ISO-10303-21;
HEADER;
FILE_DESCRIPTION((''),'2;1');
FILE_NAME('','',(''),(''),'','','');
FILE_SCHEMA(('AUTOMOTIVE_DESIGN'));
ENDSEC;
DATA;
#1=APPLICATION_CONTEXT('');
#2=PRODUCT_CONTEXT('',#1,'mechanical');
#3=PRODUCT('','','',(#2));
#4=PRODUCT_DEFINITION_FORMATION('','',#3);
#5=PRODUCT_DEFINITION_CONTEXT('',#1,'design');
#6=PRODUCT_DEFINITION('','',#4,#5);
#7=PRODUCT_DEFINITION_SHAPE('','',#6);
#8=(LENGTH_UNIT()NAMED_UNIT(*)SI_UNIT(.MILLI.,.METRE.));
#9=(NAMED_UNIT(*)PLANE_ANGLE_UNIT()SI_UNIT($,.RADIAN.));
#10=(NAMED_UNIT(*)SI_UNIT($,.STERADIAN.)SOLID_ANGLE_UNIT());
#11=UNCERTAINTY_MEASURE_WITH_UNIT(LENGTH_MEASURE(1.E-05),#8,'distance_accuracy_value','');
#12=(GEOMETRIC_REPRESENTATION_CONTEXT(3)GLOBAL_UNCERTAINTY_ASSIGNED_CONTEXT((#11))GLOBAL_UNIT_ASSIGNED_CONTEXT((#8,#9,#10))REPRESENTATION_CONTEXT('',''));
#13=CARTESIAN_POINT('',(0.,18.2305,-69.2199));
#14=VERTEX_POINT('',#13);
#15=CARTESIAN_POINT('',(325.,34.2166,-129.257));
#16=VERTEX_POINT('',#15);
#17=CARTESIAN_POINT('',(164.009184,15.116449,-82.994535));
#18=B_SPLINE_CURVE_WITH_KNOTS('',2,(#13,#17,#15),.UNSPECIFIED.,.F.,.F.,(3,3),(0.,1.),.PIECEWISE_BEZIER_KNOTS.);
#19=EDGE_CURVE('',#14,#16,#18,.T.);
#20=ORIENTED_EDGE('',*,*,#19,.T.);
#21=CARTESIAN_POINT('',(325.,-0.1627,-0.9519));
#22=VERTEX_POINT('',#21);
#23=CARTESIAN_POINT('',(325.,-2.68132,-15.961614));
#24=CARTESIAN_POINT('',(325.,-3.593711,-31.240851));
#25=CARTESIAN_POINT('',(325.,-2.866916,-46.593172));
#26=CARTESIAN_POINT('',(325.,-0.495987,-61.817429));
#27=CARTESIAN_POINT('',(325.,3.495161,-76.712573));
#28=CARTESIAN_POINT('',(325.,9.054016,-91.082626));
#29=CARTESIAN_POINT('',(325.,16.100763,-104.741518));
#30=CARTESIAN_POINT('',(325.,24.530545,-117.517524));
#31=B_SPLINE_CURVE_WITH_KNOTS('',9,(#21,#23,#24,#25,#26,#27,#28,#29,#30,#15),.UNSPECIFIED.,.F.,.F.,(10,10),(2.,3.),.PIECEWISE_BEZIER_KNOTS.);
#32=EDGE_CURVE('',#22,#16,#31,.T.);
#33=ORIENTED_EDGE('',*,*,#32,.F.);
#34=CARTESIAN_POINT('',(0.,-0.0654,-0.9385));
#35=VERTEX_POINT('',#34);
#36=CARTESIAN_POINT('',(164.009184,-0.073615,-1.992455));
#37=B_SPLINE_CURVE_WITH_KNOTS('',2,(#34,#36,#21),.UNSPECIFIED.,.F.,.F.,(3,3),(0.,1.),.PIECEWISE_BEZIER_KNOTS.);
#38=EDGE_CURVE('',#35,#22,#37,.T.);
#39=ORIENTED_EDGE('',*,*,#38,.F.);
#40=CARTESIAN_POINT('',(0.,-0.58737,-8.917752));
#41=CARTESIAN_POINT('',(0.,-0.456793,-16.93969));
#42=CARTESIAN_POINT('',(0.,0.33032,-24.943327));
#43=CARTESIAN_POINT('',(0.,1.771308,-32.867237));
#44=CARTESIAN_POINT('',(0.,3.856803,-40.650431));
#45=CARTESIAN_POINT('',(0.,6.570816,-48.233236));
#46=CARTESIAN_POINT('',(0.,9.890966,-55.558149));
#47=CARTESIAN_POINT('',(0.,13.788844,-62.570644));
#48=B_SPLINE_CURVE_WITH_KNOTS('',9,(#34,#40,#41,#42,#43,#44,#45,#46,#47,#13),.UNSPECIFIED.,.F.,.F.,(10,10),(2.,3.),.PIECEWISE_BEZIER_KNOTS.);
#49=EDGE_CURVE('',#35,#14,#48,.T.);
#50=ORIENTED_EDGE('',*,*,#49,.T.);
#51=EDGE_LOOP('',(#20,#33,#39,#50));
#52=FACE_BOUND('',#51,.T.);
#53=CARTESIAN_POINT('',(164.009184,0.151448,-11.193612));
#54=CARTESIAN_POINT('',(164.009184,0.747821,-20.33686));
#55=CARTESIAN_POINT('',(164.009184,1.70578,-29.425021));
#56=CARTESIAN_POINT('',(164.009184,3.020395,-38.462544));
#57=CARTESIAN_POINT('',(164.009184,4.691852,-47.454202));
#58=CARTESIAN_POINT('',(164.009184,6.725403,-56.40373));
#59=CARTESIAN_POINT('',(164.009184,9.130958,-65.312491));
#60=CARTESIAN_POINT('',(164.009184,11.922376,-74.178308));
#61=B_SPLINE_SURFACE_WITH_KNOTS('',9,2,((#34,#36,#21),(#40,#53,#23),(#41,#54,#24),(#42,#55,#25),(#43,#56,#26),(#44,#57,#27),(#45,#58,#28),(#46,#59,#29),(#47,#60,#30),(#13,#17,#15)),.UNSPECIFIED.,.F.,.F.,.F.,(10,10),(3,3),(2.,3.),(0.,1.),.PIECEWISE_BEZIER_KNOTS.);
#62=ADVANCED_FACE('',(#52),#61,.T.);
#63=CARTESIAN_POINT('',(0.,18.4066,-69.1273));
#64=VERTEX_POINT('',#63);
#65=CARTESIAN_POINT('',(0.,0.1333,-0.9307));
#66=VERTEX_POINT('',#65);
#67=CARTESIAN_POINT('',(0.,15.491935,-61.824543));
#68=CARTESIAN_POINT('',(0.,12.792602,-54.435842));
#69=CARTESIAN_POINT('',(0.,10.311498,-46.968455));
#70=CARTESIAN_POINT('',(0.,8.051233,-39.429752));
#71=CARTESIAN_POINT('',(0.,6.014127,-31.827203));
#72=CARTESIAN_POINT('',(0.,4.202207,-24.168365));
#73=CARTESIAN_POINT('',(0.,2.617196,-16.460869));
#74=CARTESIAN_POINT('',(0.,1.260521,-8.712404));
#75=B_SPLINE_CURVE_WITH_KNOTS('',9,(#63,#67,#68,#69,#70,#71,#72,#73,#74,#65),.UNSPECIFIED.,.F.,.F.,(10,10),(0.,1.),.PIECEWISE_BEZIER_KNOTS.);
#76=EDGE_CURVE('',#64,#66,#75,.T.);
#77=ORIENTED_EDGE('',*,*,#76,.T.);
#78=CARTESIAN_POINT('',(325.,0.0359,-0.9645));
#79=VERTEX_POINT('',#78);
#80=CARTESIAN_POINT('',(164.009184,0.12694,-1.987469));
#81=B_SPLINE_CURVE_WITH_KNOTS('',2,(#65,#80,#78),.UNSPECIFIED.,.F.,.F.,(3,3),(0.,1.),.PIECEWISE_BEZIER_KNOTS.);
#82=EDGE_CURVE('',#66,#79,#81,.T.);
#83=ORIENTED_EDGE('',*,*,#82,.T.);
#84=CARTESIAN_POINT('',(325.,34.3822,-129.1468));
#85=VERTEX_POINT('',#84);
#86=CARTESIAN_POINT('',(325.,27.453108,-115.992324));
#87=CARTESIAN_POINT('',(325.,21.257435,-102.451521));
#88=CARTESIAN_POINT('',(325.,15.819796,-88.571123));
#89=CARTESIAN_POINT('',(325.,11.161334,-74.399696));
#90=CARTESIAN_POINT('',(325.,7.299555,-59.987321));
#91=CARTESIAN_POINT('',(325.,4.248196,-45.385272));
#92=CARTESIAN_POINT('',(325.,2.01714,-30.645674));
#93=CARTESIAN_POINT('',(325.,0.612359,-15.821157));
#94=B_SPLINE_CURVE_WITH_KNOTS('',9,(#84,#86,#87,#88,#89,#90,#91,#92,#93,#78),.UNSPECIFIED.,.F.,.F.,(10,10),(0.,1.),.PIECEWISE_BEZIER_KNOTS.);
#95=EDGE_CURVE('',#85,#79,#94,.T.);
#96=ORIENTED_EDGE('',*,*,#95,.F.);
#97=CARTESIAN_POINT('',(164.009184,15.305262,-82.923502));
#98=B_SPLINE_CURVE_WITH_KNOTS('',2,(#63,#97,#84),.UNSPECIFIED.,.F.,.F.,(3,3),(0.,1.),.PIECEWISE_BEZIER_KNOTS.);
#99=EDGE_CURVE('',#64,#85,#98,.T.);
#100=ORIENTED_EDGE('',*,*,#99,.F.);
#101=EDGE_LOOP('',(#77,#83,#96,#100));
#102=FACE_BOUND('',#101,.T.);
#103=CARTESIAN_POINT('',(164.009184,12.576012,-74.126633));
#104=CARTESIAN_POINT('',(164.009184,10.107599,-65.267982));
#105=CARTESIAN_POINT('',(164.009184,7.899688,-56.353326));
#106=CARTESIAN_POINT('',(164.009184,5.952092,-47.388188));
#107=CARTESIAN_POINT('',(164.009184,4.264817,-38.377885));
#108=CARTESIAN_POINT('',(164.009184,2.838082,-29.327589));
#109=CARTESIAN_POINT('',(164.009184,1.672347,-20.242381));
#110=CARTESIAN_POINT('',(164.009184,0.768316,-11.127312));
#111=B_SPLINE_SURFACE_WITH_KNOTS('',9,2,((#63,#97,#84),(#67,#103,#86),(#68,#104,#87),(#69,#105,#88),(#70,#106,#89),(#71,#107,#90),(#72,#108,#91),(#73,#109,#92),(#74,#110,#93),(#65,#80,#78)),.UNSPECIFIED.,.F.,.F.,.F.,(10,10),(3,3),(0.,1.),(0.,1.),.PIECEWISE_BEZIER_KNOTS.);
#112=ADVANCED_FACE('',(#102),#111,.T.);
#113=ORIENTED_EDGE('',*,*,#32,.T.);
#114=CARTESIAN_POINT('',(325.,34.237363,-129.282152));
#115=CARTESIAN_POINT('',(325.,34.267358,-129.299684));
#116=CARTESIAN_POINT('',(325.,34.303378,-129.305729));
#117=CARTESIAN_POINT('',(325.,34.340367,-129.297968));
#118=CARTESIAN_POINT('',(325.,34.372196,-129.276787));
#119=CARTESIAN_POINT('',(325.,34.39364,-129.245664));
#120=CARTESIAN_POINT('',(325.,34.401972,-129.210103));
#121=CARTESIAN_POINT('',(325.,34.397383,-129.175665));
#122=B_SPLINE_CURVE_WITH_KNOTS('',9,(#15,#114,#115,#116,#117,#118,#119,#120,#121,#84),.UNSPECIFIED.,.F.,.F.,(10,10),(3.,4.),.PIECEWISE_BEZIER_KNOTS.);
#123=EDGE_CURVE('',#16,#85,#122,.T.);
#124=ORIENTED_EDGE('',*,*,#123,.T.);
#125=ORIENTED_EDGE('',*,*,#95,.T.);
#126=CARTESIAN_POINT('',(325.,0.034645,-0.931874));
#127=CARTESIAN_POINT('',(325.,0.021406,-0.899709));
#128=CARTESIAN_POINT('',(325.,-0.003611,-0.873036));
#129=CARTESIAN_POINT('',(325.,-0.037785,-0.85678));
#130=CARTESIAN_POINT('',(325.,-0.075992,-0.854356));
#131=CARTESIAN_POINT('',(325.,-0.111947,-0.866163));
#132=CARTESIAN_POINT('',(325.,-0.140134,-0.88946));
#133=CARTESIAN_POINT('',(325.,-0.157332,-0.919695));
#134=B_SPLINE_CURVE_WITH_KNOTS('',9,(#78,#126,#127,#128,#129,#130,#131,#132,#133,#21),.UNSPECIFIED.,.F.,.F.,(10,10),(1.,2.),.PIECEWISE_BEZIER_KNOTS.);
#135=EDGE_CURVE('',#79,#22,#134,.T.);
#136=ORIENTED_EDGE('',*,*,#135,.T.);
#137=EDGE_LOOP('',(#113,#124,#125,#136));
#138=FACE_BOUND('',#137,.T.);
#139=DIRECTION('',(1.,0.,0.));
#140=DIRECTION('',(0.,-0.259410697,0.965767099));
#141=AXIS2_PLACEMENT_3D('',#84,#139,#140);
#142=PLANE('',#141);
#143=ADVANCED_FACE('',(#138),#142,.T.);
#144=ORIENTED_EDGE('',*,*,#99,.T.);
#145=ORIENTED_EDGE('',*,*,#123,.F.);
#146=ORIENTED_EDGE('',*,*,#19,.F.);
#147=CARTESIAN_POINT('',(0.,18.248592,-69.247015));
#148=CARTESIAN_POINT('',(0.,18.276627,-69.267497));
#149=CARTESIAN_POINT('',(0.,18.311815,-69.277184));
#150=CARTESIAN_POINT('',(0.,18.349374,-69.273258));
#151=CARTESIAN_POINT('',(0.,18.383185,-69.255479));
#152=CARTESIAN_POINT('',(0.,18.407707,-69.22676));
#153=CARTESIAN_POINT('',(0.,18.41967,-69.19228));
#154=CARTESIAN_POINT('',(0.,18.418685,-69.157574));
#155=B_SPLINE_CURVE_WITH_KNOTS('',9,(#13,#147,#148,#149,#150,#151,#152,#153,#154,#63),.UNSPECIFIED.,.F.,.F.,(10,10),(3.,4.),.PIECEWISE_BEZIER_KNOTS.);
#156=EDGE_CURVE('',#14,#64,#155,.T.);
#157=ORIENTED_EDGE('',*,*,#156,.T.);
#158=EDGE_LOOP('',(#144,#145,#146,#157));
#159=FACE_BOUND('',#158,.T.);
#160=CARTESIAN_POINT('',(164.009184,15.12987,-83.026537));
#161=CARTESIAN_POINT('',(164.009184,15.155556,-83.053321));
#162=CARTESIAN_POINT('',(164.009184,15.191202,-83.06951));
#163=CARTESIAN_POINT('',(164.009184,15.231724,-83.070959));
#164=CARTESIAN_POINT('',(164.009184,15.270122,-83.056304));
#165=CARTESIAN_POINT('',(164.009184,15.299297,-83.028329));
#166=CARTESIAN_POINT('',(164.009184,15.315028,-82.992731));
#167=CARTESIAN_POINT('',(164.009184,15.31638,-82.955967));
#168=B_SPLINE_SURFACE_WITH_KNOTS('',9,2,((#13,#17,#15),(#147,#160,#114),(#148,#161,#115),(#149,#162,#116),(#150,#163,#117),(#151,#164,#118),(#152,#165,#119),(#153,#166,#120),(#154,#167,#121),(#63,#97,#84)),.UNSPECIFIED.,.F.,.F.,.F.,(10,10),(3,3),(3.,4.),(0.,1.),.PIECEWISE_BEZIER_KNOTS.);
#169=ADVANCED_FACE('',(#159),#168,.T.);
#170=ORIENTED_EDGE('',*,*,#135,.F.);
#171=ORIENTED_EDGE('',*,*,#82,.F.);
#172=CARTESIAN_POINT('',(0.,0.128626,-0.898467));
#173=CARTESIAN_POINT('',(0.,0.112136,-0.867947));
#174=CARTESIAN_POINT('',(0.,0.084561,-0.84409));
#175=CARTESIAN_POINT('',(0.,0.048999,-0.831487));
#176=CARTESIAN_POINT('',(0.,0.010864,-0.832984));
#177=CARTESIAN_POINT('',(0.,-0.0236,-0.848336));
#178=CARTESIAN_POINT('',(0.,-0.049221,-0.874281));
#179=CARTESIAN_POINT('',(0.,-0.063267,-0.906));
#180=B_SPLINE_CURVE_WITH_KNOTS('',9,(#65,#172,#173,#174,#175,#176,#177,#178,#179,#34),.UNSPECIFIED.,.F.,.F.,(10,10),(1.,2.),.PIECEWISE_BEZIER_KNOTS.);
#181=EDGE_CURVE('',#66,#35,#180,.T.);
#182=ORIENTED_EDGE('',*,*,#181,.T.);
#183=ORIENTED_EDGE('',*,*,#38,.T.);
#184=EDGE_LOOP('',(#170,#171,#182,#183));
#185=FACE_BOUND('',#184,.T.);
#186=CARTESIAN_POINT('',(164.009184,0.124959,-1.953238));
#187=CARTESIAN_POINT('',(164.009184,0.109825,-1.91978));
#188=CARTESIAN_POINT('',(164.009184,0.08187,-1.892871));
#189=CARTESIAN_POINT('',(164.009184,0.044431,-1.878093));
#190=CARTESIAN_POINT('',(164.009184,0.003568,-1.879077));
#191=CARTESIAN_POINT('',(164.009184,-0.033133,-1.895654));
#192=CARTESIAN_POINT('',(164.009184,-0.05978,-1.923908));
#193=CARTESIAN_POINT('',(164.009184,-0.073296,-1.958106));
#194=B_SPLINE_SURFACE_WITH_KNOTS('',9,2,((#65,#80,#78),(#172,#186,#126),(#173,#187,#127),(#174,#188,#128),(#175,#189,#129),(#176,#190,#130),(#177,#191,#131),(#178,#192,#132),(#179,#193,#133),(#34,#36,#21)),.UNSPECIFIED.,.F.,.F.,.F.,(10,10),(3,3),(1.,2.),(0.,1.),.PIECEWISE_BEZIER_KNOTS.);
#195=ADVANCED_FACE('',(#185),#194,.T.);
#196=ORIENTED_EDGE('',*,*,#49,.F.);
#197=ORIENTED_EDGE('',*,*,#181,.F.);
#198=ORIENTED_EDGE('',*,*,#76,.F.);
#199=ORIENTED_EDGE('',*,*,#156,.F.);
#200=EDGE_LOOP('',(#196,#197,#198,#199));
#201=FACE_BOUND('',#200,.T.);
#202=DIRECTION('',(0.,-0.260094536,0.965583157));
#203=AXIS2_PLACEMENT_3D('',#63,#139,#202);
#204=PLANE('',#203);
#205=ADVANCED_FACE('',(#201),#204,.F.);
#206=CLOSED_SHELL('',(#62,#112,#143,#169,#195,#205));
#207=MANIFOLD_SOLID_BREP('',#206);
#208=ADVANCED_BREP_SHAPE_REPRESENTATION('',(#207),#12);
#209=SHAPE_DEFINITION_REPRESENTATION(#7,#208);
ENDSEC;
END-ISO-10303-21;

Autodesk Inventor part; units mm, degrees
ref_plane "XZ Plane" through (0, 0, 0) normal (0, 1, 0) x (-1, 0, 0)
ref_plane "作業平面1" through (150, 0, 0) normal (1, 0, 0) x (0, 1, 0)
ref_plane "作業平面2" through (325, 0, 0) normal (1, 0, 0) x (0, 1, 0)
sketch "スケッチ2" plane through (0, 0, 0) normal (1, 0, 0) x (0, 1, 0)
  arc A0 (0.1333, -0.9307) -> (18.4066, -69.1273) centre (297.0345, 42.0773) ccw
  arc A1 (-0.0654, -0.9385) -> (18.2305, -69.2199) centre (109.7, -8.1189) ccw
  line L0 (0, -93.2911) -> (0, 64.6387) projected
  line L1 (0, 0) -> (18.7564, -70)
  arc A2 (18.2305, -69.2199) -> (18.4066, -69.1273) centre (18.3137, -69.1644) ccw
  arc A3 (0.1333, -0.9307) -> (-0.0654, -0.9385) centre (0.0344, -0.945) ccw
  dimension "d6" = 70
  dimension "d8" = 15
  dimension "d9" = 0.1
  dimension "d10" = 0.1
  dimension "d31" = 300
  dimension "d32" = 110
sketch "スケッチ3" plane through (150, 0, 0) normal (1, 0, 0) x (0, 1, 0)
  line L0 (0, 0) -> (20.7781, -90)
  arc A0 (0.1096, -1.4627) -> (20.2354, -88.6373) centre (299.2155, 21.6808) ccw
  arc A1 (-0.09, -1.4648) -> (20.0552, -88.7229) centre (159.6525, -10.5398) ccw
  line L1 (0, -112.5294) -> (0, 44.0492) projected
  arc A2 (20.0552, -88.7229) -> (20.2354, -88.6373) centre (20.1424, -88.674) ccw
  arc A3 (0.1096, -1.4627) -> (-0.09, -1.4648) centre (0.0099, -1.4705) ccw
  dimension "d11" = 13
  dimension "d12" = 90
  dimension "d13" = 0.1
  dimension "d29" = 300
  dimension "d30" = 160
sketch "スケッチ4" plane through (325, 0, 0) normal (1, 0, 0) x (0, 1, 0)
  line L0 (0, 0) -> (34.8334, -130)
  arc A0 (0.0359, -0.9645) -> (34.3822, -129.1468) centre (299.8103, 10.6671) ccw
  arc A1 (-0.1627, -0.9519) -> (34.2166, -129.257) centre (157.6313, -27.4296) ccw
  line L1 (0, -161.7253) -> (0, 39.3992) projected
  arc A2 (34.2166, -129.257) -> (34.3822, -129.1468) centre (34.2937, -129.1934) ccw
  arc A3 (0.0359, -0.9645) -> (-0.1627, -0.9519) centre (-0.0641, -0.9684) ccw
  dimension "d18" = 15
  dimension "d19" = 130
  dimension "d20" = 0.1
  dimension "d27" = 300
  dimension "d28" = 160
loft "ロフト2" add profiles "スケッチ2", "スケッチ3", "スケッチ4"
properties part number "test_front_element_1"
